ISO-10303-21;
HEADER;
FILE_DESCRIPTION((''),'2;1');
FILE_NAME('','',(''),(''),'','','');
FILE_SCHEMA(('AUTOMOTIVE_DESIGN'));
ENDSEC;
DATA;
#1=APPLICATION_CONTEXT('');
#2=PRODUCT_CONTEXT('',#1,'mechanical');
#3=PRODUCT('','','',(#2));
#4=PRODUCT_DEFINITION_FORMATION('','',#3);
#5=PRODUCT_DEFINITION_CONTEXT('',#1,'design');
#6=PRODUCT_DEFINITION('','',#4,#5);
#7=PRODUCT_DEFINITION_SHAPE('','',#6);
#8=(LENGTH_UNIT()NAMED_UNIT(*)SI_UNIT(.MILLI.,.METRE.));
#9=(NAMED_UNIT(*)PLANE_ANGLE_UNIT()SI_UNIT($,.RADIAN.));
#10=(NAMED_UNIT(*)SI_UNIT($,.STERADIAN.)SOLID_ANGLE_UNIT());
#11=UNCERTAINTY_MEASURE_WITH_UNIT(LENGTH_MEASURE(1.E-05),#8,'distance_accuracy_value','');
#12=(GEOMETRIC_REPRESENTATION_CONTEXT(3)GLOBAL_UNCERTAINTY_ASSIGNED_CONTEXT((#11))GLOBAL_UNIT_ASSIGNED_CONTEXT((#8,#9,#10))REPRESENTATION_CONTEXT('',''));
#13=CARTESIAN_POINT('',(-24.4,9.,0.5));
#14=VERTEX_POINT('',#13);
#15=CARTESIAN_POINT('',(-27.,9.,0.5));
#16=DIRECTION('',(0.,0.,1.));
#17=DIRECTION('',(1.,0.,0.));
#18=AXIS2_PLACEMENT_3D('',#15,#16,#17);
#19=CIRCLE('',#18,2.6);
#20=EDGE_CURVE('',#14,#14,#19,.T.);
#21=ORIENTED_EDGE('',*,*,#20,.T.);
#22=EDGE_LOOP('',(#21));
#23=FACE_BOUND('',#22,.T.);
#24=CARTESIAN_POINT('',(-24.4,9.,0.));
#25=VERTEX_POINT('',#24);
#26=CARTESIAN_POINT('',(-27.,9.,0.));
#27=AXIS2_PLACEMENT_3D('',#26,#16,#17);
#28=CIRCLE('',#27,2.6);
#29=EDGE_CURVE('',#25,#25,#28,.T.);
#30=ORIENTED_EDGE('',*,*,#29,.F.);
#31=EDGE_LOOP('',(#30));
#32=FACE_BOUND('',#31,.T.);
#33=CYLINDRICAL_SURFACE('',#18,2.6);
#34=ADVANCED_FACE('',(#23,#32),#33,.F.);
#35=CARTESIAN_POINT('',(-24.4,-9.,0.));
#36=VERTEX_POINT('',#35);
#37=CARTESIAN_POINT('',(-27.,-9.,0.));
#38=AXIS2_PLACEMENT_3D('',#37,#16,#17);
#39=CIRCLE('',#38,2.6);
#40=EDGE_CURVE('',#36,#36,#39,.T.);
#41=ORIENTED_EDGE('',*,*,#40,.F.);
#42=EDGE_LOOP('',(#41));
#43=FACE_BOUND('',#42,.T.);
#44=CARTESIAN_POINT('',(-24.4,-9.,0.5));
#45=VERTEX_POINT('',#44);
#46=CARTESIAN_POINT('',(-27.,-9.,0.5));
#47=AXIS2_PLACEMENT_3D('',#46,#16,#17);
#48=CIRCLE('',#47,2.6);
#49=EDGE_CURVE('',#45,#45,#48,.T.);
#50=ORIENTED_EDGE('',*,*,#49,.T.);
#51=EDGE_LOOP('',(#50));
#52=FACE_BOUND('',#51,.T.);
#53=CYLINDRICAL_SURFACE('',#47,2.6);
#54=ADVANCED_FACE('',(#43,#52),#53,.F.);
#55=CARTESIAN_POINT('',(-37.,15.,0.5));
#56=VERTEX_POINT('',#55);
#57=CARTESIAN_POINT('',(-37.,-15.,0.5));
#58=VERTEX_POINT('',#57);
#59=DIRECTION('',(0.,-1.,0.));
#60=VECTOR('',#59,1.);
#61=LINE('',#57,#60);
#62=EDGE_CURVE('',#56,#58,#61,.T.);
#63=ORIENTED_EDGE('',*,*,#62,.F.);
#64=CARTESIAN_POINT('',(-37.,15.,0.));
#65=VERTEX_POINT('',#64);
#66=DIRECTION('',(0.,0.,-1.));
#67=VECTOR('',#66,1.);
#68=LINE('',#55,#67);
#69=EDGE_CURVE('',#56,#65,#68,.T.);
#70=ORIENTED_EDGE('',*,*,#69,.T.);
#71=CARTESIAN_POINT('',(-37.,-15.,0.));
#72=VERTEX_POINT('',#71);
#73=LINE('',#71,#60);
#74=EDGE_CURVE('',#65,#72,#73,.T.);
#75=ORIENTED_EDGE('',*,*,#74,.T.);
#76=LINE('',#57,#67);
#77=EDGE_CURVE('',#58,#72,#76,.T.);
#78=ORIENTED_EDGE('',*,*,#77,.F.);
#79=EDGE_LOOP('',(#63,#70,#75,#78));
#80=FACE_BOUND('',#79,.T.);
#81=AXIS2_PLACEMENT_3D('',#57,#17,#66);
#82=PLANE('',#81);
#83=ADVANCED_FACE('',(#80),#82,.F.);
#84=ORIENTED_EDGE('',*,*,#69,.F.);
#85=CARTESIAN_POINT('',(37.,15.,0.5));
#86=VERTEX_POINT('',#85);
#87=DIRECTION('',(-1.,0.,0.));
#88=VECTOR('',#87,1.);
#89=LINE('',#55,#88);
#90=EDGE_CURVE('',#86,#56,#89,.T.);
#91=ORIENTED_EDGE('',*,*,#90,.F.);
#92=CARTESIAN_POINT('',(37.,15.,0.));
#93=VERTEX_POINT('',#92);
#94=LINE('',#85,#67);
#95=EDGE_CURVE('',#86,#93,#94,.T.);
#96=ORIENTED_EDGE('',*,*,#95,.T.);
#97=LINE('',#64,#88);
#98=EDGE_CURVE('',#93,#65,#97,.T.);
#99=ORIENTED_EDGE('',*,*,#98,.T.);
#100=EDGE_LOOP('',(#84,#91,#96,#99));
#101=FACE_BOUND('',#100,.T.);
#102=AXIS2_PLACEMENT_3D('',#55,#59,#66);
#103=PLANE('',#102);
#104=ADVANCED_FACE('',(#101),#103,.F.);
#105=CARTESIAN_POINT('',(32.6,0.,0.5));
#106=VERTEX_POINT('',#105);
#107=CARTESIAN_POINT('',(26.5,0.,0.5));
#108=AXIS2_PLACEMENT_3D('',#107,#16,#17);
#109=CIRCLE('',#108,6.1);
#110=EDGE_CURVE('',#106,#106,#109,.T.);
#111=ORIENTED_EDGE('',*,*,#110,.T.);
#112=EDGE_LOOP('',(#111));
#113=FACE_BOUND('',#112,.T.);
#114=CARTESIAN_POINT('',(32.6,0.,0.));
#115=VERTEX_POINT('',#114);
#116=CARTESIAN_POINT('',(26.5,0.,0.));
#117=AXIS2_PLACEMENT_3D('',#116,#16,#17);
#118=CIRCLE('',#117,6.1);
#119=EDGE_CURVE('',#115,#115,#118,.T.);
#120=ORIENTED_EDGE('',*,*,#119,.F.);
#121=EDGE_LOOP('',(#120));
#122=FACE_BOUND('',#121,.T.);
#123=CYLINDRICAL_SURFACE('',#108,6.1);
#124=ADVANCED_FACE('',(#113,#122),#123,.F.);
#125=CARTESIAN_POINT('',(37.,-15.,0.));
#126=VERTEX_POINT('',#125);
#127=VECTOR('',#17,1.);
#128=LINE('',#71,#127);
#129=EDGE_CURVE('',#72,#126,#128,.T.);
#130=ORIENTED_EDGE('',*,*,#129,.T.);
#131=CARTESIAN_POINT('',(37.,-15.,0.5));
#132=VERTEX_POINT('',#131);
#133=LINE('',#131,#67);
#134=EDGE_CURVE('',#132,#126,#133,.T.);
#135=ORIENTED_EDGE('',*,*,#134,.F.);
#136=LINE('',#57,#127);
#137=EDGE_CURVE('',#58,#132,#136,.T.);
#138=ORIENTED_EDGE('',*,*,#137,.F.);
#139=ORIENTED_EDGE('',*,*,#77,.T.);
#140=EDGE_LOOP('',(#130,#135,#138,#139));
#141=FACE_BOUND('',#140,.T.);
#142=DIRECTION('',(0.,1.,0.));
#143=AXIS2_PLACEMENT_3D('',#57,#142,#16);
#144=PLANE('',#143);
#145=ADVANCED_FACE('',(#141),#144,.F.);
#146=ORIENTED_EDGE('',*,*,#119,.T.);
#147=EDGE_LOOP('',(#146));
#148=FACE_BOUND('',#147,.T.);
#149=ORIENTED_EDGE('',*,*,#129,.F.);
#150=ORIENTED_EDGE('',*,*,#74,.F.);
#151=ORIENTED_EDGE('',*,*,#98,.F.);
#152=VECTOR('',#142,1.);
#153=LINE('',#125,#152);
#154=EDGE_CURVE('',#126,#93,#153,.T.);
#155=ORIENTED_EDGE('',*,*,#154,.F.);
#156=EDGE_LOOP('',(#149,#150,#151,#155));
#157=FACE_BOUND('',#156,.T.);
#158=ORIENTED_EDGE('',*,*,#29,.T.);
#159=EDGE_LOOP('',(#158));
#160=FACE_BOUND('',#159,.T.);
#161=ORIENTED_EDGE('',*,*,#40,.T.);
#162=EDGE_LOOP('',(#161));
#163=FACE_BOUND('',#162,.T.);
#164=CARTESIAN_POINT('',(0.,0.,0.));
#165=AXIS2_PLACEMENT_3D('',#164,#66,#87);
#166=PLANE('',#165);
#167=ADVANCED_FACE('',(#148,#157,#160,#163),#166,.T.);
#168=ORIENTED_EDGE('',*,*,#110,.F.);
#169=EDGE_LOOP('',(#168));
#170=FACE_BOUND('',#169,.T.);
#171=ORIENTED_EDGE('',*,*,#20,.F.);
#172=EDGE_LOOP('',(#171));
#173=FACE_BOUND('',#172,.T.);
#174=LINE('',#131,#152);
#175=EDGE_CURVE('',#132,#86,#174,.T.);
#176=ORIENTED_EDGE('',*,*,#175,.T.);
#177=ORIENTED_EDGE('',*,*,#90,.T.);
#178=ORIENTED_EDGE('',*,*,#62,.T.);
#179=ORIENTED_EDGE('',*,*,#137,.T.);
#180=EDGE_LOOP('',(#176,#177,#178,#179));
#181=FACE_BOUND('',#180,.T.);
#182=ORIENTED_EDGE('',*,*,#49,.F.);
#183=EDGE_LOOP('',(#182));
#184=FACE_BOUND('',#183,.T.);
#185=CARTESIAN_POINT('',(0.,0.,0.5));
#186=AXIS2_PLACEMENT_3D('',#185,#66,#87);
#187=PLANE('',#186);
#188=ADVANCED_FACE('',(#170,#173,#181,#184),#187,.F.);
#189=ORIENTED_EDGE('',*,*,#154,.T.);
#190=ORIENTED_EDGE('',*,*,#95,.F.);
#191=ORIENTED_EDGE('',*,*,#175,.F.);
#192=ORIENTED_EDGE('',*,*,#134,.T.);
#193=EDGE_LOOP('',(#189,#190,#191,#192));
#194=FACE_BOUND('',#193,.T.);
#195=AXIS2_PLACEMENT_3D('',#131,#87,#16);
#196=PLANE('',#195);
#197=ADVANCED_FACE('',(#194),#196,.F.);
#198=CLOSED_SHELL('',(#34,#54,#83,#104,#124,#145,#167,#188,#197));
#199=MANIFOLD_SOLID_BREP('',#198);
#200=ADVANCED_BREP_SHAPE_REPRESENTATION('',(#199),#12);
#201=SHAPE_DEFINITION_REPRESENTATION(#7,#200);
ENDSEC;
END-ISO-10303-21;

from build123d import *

# Parameters (mm, degrees)
SKETCH1_W                    = 74
SKETCH1_H                    = 30
BASE_FLANGE1_DEPTH           = 0.5
F_5_2_5_2_DIAMETER_HOLE1_D   = 5.2
F_12_2_12_2_DIAMETER_HOLE1_D = 12.2


# Sheet-metal steps are written as plain solids
with BuildPart() as part:
    # Sketch1 → Base-Flange1 (new body)
    with BuildSketch(Plane.XY):
        Rectangle(SKETCH1_W, SKETCH1_H)
    extrude(amount=BASE_FLANGE1_DEPTH)

    # Ø5.2 (5.2) Diameter Hole1 (through all)
    with Locations(Plane.XY.offset(0.5)):
        with Locations((-27, 9)):
            f_5_2_5_2_diameter_hole1 = Hole(F_5_2_5_2_DIAMETER_HOLE1_D / 2)

    # Mirror1: Ø5.2 (5.2) Diameter Hole1 across plane
    add(f_5_2_5_2_diameter_hole1.mirror(Plane.ZX), mode=Mode.SUBTRACT)

    # Ø12.2 (12.2) Diameter Hole1 (through all)
    with Locations(Plane.XY.offset(0.5)):
        with Locations((26.5, 0)):
            Hole(F_12_2_12_2_DIAMETER_HOLE1_D / 2)


solid = part.part
